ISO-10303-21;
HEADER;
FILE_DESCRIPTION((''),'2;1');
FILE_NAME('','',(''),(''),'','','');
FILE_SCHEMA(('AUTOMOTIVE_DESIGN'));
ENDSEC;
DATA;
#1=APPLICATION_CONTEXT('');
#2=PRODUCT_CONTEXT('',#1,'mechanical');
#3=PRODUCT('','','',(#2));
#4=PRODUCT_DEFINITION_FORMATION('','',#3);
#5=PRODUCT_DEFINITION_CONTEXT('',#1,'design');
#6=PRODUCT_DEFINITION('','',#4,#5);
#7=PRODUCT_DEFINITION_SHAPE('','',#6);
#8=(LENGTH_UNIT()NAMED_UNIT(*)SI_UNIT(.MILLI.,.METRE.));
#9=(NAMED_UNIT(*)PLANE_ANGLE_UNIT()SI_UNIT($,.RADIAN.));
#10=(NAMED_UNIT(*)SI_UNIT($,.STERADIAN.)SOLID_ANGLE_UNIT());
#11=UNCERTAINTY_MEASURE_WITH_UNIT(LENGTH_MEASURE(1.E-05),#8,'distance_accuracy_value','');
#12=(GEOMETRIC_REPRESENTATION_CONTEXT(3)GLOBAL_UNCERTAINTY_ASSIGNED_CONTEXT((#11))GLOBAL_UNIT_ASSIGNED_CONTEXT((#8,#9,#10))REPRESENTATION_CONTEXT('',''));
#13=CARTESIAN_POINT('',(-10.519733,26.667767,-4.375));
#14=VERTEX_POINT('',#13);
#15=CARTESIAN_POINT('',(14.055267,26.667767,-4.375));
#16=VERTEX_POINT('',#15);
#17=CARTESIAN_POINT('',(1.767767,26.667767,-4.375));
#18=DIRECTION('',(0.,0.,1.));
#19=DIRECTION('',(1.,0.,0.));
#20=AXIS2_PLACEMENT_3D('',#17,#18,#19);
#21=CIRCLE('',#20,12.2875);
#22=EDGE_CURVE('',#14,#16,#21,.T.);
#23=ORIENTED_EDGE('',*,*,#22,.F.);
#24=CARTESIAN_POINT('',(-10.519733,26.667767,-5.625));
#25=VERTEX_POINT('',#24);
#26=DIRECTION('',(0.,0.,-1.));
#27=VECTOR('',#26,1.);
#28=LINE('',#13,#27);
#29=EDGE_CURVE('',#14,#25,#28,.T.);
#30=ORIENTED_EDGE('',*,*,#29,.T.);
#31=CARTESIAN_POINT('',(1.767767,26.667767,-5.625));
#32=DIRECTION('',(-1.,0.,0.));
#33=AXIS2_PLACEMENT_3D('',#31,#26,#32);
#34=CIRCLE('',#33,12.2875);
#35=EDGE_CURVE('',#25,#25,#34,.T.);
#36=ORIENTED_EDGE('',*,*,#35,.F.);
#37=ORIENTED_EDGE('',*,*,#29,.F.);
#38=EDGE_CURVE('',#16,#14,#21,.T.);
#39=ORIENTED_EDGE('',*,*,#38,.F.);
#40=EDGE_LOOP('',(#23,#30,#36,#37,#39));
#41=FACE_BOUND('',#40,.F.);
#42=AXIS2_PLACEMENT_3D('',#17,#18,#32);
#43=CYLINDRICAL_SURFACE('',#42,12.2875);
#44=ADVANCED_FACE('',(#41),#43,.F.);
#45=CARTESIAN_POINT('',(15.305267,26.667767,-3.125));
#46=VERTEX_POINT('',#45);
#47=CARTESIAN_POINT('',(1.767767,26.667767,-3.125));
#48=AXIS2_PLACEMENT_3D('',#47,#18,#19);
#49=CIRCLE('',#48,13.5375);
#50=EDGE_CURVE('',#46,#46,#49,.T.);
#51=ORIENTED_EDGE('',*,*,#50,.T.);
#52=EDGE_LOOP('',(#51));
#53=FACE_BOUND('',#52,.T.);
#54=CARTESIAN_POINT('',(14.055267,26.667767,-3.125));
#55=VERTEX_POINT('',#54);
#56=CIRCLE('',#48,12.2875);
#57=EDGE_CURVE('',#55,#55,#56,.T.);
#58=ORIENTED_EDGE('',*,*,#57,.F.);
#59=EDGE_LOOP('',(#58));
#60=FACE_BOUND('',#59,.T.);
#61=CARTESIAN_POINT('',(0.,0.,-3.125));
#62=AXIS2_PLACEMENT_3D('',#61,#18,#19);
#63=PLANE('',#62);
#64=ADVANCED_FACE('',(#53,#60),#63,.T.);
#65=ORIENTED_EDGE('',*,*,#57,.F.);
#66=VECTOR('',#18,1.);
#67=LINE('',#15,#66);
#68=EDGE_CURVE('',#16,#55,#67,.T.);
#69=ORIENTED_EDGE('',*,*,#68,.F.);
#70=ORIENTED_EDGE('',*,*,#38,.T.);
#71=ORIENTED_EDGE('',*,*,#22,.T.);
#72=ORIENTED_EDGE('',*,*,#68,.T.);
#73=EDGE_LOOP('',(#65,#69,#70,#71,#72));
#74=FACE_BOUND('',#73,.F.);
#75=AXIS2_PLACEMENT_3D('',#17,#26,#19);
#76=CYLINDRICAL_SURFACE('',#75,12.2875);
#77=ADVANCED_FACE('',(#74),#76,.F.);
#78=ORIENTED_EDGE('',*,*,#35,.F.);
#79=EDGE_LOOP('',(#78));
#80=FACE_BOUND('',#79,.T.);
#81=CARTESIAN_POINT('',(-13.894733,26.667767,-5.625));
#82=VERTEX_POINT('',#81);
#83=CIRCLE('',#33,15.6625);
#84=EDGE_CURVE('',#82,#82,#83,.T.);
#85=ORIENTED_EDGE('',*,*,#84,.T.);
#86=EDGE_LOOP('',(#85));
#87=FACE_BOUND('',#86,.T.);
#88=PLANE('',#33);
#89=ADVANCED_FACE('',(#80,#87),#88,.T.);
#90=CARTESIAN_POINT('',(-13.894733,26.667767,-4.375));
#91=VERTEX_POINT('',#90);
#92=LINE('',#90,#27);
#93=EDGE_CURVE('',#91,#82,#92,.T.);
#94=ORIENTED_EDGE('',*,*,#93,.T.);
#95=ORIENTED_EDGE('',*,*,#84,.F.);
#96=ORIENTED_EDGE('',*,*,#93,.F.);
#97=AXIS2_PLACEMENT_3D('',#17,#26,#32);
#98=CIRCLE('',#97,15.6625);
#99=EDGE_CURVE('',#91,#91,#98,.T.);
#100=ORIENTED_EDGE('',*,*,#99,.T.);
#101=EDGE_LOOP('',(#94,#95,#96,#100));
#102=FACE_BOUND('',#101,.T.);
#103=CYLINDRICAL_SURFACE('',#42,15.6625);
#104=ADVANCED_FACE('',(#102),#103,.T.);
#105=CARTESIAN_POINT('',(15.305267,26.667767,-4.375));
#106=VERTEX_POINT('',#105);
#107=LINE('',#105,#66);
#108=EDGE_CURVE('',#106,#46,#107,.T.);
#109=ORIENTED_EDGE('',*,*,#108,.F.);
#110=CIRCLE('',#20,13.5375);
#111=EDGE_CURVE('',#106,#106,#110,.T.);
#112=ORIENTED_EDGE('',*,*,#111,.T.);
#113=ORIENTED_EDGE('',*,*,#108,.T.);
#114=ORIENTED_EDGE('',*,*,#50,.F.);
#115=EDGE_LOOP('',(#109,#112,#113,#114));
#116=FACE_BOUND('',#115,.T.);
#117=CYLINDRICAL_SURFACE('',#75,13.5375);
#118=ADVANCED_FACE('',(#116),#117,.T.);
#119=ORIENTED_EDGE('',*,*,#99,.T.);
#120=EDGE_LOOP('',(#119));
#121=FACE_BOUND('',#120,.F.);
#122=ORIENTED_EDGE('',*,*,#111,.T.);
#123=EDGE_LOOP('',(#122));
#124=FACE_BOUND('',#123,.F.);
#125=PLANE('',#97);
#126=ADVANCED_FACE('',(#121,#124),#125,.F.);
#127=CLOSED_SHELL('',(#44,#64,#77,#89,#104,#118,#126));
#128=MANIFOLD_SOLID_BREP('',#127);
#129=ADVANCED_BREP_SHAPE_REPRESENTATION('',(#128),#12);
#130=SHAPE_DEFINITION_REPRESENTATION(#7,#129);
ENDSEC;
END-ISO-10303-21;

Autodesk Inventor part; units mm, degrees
ref_plane "YZ Plane" through (0, 0, 0) normal (1, 0, 0) x (0, 1, 0)
ref_plane "XZ Plane" through (0, 0, 0) normal (0, 1, 0) x (-1, 0, 0)
sketch "Sketch1" plane through (0, 0, 0) normal (0, 0, 1) x (1, 0, 0)
  circle A0 centre (1.767767, 26.667767) radius 13.575
  circle A1 centre (1.767767, 26.667767) radius 13.5375
  circle A2 centre (1.767767, 26.667767) radius 12.2875
  point P0 (0, 0)
  dimension "d0" = 0.0375
  dimension "d1" = 1.25
ref_plane "Work Plane1" through (-21.967767, 1.0375, -4.375) normal (0, 0, -1) x (0, 1, 0)
sketch "Sketch1 outline for Extrusion1" plane through (0, 0, 0) normal (0, 0, 1) x (1, 0, 0)
  circle A0 centre (1.767767, 26.667767) radius 13.5375
  circle A1 centre (1.767767, 26.667767) radius 12.2875
extrude "Extrusion1" add sketch "Sketch1 outline for Extrusion1" along normal blind 1.25 from surface at -4.375
sketch "Sketch2" plane through (1.767767, 26.667767, -4.375) normal (0, 0, -1) x (-1, 0, 0)
  circle A0 centre (0, 0) radius 13.5375 projected
  circle A1 centre (0, 0) radius 12.2875 projected
  circle A2 centre (0, 0) radius 13.6625
  circle A3 centre (0, 0) radius 15.6625
  point P0 (1.767767, -26.667767)
  dimension "d4" = 0.125
  dimension "d5" = 2
extrude "Extrusion2" add sketch "Sketch2" along normal blind 1.25 contours A0 | A2 | A3
properties part number "One Inch Lense Holder Cover (V5)"
